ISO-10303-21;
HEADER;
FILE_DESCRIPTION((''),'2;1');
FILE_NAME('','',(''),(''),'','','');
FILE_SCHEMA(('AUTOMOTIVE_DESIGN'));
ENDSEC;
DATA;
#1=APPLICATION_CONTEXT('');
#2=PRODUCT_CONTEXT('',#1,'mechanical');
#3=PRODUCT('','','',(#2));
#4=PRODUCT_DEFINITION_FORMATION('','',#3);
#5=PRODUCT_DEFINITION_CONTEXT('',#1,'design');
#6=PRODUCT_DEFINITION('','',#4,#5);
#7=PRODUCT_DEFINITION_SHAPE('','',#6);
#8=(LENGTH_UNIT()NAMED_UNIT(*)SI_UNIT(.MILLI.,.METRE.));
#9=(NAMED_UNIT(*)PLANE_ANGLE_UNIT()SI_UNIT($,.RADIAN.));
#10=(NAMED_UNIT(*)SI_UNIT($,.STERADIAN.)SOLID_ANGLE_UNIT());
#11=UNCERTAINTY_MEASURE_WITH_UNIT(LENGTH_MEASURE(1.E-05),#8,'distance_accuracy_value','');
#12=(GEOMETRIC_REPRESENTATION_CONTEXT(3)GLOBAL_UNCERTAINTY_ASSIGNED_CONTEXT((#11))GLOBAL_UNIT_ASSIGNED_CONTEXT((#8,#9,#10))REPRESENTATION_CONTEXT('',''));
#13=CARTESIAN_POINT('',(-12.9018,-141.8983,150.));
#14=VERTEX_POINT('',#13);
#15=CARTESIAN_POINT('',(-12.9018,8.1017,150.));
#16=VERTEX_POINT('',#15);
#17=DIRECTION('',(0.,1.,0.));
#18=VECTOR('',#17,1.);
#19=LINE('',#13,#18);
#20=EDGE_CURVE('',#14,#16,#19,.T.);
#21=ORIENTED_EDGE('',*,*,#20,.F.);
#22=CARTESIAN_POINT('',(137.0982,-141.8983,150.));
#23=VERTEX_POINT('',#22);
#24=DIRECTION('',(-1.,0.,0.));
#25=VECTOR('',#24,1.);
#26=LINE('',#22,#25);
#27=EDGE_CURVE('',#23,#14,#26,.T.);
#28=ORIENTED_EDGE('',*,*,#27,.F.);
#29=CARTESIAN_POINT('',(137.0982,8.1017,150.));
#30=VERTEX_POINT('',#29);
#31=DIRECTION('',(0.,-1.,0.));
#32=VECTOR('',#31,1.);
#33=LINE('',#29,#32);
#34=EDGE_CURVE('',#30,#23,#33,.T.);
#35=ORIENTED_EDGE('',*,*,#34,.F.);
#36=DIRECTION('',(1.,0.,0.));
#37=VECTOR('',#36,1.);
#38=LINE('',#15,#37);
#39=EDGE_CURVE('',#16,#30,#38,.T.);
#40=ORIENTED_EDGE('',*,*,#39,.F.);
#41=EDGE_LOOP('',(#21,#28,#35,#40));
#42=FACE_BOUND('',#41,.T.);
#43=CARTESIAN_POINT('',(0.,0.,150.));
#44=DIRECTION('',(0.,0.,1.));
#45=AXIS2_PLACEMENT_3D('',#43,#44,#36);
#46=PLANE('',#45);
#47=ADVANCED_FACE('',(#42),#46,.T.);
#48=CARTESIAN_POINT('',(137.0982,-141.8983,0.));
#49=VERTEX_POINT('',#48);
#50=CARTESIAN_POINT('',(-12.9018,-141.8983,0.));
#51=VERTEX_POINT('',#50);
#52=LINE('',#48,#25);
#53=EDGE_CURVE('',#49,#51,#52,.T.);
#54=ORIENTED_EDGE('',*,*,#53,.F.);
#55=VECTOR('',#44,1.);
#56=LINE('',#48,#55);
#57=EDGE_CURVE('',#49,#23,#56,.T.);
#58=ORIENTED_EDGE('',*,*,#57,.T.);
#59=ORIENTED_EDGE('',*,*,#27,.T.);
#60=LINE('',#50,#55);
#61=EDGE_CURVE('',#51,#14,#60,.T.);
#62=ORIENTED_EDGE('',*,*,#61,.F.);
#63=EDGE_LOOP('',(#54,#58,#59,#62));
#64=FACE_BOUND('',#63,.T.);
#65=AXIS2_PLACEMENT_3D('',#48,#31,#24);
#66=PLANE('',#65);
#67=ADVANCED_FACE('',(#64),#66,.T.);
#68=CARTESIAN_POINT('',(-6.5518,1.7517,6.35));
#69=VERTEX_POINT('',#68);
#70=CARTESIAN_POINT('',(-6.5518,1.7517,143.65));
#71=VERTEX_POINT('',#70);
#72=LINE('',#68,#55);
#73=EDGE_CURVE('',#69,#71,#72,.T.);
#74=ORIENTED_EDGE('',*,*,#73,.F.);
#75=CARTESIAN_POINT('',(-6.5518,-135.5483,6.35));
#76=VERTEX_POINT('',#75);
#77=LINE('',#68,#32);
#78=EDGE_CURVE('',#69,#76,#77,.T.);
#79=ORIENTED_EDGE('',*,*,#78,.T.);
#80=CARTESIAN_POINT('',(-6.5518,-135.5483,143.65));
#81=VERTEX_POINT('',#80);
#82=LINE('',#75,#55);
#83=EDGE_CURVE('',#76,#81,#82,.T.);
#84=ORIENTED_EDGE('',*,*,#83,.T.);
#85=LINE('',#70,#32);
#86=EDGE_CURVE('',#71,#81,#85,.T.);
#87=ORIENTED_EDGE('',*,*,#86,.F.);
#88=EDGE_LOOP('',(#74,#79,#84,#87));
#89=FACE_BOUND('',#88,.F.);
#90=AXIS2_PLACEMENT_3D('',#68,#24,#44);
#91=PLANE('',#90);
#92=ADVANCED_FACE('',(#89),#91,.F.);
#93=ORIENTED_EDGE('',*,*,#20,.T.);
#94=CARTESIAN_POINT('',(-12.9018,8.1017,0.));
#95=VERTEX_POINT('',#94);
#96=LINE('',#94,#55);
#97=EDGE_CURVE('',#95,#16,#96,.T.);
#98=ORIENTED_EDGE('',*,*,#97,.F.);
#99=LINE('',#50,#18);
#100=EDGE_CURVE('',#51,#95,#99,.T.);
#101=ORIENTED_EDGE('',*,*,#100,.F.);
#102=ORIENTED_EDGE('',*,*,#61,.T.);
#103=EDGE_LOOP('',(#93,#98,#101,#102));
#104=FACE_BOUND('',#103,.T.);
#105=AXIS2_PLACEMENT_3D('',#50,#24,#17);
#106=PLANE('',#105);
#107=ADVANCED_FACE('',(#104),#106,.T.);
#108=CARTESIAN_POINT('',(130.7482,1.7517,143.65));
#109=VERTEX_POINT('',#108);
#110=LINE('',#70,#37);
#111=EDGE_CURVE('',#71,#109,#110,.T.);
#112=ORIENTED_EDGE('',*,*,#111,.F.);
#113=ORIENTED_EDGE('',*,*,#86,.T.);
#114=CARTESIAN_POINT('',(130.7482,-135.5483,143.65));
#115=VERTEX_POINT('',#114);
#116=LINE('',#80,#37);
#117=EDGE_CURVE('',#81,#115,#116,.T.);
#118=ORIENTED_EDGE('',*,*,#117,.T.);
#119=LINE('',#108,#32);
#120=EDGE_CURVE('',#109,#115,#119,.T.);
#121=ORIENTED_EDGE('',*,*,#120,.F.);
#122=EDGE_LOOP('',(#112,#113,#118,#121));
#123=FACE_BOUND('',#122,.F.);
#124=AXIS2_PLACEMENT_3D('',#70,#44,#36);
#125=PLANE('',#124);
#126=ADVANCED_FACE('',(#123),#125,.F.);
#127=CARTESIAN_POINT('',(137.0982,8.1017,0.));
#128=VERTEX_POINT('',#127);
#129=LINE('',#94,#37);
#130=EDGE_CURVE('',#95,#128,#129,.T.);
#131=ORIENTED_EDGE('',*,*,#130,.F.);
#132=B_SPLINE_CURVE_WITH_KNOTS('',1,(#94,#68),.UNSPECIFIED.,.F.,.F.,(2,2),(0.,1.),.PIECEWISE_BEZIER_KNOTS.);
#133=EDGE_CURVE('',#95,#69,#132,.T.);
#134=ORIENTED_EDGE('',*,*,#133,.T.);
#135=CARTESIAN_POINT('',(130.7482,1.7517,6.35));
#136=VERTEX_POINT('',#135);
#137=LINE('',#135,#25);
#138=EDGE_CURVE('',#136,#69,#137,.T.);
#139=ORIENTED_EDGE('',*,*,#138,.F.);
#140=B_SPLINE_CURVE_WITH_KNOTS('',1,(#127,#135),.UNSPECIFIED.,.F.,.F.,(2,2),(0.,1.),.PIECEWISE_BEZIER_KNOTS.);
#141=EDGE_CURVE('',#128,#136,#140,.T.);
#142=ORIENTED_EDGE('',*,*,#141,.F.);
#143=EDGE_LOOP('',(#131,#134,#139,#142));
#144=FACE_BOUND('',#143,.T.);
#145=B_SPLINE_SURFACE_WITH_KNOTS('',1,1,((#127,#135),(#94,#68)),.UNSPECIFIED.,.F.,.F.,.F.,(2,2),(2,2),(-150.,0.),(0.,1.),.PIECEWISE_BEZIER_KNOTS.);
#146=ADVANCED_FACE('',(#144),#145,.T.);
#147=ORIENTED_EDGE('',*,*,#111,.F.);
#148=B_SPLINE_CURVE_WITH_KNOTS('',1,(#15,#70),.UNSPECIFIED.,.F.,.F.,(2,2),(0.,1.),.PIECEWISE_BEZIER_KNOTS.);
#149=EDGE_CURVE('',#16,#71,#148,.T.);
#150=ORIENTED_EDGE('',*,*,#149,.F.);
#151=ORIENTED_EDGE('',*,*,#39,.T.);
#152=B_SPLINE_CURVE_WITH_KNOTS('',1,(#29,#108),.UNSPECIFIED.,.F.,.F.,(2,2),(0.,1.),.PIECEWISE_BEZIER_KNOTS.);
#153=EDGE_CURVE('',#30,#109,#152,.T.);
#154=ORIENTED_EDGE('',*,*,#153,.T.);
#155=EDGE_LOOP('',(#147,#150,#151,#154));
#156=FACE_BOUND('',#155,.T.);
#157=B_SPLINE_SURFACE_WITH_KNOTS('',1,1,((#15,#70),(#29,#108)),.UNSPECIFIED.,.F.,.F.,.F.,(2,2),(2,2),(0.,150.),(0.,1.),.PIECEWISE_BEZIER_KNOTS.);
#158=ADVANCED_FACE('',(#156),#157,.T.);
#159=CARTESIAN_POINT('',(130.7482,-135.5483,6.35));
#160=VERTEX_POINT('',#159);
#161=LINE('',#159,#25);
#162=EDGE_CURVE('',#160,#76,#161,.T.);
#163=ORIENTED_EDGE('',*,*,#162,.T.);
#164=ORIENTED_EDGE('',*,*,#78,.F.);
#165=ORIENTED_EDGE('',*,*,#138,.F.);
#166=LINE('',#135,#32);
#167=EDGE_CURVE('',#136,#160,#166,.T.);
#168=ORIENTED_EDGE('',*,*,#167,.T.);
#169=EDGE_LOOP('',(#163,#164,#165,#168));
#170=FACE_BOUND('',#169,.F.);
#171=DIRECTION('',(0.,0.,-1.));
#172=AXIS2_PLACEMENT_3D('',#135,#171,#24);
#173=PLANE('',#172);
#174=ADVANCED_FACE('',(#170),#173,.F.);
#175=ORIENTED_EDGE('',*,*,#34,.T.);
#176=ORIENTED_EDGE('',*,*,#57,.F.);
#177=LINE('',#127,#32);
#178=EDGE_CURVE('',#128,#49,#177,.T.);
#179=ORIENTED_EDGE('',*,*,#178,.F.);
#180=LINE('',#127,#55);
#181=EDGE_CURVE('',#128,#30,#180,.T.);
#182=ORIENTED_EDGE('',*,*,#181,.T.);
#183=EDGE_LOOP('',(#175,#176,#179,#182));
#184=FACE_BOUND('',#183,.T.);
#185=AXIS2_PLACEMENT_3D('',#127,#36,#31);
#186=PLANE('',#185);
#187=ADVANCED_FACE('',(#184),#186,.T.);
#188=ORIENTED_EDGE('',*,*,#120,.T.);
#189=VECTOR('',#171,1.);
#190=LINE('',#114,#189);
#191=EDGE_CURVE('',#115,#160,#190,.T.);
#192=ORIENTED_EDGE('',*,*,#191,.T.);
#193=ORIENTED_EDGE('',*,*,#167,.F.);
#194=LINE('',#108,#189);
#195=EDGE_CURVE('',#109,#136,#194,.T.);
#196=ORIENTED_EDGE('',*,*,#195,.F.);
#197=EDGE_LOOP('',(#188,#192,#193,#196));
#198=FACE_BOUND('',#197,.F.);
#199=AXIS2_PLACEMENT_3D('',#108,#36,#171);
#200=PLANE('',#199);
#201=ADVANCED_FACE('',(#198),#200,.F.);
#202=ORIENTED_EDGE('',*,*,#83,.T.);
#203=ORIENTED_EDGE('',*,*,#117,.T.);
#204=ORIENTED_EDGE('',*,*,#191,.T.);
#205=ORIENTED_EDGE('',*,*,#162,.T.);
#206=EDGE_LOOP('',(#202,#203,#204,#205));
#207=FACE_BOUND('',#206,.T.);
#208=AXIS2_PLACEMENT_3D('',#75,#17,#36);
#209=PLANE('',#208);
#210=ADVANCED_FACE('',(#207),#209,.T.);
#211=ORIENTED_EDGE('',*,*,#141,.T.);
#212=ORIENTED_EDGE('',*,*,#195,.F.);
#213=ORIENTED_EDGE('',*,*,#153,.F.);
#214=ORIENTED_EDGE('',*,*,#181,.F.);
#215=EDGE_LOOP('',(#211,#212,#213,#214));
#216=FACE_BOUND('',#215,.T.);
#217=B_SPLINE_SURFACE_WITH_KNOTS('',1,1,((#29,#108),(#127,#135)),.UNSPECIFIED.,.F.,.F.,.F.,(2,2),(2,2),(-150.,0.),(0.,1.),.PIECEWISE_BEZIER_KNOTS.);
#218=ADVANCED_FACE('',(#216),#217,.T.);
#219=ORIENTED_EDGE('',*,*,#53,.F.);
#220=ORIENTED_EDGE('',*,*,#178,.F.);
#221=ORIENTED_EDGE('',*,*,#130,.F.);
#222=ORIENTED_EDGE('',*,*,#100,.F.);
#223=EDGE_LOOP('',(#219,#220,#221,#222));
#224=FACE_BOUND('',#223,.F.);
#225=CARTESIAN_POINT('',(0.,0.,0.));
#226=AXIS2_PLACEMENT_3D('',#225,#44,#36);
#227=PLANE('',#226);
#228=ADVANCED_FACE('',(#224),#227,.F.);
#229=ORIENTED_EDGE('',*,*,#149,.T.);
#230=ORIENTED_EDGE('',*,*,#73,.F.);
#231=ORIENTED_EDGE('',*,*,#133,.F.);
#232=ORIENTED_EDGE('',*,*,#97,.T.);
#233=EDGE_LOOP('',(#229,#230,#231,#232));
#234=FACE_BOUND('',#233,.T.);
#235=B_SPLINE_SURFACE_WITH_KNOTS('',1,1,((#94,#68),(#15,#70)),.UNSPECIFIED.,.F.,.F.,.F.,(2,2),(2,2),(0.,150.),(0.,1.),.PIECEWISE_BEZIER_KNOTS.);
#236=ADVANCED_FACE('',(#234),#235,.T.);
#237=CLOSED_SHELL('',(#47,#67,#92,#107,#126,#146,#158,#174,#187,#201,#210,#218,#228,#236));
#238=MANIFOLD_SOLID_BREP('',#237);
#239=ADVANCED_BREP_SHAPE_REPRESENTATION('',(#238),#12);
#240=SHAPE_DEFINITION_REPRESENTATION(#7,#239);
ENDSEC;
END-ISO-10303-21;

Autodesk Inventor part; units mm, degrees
ref_plane "YZ Plane" through (0, 0, 0) normal (1, 0, 0) x (0, 1, 0)
ref_plane "XZ Plane" through (0, 0, 0) normal (0, 1, 0) x (-1, 0, 0)
ref_plane "XY Plane" through (0, 0, 0) normal (0, 0, 1) x (1, 0, 0)
sketch "Sketch1" plane through (0, 0, 0) normal (0, 0, 1) x (1, 0, 0)
  line L0 (-12.9018, 8.1017) -> (137.0982, 8.1017)
  line L1 (137.0982, 8.1017) -> (137.0982, -141.8983)
  line L2 (137.0982, -141.8983) -> (-12.9018, -141.8983)
  line L3 (-12.9018, -141.8983) -> (-12.9018, 8.1017)
  point P0 (0, 0)
  dimension "d0" = 150
  dimension "d1" = 150
extrude "Extrusion1" add sketch "Sketch1" along normal blind 150
sketch "Sketch2" plane through (-12.9018, 8.1017, 0) normal (0, 1, 0) x (1, 0, 0)
  point P0 (12.9018, 0)
ref_plane "Work Plane1" through (-12.9018, 1.7517, 0) normal (0, 1, 0) x (1, 0, 0)
sketch "Sketch3" plane through (-12.9018, 1.7517, 0) normal (0, 1, 0) x (1, 0, 0)
  line L0 (6.35, -143.65) -> (143.65, -143.65)
  line L1 (143.65, -143.65) -> (143.65, -6.35)
  line L2 (143.65, -6.35) -> (6.35, -6.35)
  line L3 (6.35, -6.35) -> (6.35, -143.65)
  line L4 (150, -150) -> (0, -150) projected
  line L5 (0, 0) -> (0, -150) projected
  point P0 (12.9018, 0)
  dimension "d5" = 137.3
  dimension "d6" = 137.3
  dimension "d7" = 6.35
  dimension "d8" = 6.35
loft "Loft1" cut profiles "Sketch3" section 1 edges at (62.0982, 8.1017, 0) (-12.9018, 8.1017, 75) (62.0982, 8.1017, 150) (137.0982, 8.1017, 75)
sketch "Sketch4" plane through (-6.5518, 1.7517, 6.35) normal (0, 1, 0) x (1, 0, 0)
  line L0 (0, -137.3) -> (137.3, -137.3) projected
  line L1 (137.3, -137.3) -> (137.3, 0) projected
  line L2 (0, -137.3) -> (137.3, -137.3)
  line L3 (137.3, -137.3) -> (137.3, 0)
  line L4 (137.3, 0) -> (0, 0)
  line L5 (0, 0) -> (0, -137.3)
  point P0 (6.5518, 6.35)
extrude "Extrusion2" cut sketch "Sketch4" against normal blind 137.3
properties part number "insulationbox"
